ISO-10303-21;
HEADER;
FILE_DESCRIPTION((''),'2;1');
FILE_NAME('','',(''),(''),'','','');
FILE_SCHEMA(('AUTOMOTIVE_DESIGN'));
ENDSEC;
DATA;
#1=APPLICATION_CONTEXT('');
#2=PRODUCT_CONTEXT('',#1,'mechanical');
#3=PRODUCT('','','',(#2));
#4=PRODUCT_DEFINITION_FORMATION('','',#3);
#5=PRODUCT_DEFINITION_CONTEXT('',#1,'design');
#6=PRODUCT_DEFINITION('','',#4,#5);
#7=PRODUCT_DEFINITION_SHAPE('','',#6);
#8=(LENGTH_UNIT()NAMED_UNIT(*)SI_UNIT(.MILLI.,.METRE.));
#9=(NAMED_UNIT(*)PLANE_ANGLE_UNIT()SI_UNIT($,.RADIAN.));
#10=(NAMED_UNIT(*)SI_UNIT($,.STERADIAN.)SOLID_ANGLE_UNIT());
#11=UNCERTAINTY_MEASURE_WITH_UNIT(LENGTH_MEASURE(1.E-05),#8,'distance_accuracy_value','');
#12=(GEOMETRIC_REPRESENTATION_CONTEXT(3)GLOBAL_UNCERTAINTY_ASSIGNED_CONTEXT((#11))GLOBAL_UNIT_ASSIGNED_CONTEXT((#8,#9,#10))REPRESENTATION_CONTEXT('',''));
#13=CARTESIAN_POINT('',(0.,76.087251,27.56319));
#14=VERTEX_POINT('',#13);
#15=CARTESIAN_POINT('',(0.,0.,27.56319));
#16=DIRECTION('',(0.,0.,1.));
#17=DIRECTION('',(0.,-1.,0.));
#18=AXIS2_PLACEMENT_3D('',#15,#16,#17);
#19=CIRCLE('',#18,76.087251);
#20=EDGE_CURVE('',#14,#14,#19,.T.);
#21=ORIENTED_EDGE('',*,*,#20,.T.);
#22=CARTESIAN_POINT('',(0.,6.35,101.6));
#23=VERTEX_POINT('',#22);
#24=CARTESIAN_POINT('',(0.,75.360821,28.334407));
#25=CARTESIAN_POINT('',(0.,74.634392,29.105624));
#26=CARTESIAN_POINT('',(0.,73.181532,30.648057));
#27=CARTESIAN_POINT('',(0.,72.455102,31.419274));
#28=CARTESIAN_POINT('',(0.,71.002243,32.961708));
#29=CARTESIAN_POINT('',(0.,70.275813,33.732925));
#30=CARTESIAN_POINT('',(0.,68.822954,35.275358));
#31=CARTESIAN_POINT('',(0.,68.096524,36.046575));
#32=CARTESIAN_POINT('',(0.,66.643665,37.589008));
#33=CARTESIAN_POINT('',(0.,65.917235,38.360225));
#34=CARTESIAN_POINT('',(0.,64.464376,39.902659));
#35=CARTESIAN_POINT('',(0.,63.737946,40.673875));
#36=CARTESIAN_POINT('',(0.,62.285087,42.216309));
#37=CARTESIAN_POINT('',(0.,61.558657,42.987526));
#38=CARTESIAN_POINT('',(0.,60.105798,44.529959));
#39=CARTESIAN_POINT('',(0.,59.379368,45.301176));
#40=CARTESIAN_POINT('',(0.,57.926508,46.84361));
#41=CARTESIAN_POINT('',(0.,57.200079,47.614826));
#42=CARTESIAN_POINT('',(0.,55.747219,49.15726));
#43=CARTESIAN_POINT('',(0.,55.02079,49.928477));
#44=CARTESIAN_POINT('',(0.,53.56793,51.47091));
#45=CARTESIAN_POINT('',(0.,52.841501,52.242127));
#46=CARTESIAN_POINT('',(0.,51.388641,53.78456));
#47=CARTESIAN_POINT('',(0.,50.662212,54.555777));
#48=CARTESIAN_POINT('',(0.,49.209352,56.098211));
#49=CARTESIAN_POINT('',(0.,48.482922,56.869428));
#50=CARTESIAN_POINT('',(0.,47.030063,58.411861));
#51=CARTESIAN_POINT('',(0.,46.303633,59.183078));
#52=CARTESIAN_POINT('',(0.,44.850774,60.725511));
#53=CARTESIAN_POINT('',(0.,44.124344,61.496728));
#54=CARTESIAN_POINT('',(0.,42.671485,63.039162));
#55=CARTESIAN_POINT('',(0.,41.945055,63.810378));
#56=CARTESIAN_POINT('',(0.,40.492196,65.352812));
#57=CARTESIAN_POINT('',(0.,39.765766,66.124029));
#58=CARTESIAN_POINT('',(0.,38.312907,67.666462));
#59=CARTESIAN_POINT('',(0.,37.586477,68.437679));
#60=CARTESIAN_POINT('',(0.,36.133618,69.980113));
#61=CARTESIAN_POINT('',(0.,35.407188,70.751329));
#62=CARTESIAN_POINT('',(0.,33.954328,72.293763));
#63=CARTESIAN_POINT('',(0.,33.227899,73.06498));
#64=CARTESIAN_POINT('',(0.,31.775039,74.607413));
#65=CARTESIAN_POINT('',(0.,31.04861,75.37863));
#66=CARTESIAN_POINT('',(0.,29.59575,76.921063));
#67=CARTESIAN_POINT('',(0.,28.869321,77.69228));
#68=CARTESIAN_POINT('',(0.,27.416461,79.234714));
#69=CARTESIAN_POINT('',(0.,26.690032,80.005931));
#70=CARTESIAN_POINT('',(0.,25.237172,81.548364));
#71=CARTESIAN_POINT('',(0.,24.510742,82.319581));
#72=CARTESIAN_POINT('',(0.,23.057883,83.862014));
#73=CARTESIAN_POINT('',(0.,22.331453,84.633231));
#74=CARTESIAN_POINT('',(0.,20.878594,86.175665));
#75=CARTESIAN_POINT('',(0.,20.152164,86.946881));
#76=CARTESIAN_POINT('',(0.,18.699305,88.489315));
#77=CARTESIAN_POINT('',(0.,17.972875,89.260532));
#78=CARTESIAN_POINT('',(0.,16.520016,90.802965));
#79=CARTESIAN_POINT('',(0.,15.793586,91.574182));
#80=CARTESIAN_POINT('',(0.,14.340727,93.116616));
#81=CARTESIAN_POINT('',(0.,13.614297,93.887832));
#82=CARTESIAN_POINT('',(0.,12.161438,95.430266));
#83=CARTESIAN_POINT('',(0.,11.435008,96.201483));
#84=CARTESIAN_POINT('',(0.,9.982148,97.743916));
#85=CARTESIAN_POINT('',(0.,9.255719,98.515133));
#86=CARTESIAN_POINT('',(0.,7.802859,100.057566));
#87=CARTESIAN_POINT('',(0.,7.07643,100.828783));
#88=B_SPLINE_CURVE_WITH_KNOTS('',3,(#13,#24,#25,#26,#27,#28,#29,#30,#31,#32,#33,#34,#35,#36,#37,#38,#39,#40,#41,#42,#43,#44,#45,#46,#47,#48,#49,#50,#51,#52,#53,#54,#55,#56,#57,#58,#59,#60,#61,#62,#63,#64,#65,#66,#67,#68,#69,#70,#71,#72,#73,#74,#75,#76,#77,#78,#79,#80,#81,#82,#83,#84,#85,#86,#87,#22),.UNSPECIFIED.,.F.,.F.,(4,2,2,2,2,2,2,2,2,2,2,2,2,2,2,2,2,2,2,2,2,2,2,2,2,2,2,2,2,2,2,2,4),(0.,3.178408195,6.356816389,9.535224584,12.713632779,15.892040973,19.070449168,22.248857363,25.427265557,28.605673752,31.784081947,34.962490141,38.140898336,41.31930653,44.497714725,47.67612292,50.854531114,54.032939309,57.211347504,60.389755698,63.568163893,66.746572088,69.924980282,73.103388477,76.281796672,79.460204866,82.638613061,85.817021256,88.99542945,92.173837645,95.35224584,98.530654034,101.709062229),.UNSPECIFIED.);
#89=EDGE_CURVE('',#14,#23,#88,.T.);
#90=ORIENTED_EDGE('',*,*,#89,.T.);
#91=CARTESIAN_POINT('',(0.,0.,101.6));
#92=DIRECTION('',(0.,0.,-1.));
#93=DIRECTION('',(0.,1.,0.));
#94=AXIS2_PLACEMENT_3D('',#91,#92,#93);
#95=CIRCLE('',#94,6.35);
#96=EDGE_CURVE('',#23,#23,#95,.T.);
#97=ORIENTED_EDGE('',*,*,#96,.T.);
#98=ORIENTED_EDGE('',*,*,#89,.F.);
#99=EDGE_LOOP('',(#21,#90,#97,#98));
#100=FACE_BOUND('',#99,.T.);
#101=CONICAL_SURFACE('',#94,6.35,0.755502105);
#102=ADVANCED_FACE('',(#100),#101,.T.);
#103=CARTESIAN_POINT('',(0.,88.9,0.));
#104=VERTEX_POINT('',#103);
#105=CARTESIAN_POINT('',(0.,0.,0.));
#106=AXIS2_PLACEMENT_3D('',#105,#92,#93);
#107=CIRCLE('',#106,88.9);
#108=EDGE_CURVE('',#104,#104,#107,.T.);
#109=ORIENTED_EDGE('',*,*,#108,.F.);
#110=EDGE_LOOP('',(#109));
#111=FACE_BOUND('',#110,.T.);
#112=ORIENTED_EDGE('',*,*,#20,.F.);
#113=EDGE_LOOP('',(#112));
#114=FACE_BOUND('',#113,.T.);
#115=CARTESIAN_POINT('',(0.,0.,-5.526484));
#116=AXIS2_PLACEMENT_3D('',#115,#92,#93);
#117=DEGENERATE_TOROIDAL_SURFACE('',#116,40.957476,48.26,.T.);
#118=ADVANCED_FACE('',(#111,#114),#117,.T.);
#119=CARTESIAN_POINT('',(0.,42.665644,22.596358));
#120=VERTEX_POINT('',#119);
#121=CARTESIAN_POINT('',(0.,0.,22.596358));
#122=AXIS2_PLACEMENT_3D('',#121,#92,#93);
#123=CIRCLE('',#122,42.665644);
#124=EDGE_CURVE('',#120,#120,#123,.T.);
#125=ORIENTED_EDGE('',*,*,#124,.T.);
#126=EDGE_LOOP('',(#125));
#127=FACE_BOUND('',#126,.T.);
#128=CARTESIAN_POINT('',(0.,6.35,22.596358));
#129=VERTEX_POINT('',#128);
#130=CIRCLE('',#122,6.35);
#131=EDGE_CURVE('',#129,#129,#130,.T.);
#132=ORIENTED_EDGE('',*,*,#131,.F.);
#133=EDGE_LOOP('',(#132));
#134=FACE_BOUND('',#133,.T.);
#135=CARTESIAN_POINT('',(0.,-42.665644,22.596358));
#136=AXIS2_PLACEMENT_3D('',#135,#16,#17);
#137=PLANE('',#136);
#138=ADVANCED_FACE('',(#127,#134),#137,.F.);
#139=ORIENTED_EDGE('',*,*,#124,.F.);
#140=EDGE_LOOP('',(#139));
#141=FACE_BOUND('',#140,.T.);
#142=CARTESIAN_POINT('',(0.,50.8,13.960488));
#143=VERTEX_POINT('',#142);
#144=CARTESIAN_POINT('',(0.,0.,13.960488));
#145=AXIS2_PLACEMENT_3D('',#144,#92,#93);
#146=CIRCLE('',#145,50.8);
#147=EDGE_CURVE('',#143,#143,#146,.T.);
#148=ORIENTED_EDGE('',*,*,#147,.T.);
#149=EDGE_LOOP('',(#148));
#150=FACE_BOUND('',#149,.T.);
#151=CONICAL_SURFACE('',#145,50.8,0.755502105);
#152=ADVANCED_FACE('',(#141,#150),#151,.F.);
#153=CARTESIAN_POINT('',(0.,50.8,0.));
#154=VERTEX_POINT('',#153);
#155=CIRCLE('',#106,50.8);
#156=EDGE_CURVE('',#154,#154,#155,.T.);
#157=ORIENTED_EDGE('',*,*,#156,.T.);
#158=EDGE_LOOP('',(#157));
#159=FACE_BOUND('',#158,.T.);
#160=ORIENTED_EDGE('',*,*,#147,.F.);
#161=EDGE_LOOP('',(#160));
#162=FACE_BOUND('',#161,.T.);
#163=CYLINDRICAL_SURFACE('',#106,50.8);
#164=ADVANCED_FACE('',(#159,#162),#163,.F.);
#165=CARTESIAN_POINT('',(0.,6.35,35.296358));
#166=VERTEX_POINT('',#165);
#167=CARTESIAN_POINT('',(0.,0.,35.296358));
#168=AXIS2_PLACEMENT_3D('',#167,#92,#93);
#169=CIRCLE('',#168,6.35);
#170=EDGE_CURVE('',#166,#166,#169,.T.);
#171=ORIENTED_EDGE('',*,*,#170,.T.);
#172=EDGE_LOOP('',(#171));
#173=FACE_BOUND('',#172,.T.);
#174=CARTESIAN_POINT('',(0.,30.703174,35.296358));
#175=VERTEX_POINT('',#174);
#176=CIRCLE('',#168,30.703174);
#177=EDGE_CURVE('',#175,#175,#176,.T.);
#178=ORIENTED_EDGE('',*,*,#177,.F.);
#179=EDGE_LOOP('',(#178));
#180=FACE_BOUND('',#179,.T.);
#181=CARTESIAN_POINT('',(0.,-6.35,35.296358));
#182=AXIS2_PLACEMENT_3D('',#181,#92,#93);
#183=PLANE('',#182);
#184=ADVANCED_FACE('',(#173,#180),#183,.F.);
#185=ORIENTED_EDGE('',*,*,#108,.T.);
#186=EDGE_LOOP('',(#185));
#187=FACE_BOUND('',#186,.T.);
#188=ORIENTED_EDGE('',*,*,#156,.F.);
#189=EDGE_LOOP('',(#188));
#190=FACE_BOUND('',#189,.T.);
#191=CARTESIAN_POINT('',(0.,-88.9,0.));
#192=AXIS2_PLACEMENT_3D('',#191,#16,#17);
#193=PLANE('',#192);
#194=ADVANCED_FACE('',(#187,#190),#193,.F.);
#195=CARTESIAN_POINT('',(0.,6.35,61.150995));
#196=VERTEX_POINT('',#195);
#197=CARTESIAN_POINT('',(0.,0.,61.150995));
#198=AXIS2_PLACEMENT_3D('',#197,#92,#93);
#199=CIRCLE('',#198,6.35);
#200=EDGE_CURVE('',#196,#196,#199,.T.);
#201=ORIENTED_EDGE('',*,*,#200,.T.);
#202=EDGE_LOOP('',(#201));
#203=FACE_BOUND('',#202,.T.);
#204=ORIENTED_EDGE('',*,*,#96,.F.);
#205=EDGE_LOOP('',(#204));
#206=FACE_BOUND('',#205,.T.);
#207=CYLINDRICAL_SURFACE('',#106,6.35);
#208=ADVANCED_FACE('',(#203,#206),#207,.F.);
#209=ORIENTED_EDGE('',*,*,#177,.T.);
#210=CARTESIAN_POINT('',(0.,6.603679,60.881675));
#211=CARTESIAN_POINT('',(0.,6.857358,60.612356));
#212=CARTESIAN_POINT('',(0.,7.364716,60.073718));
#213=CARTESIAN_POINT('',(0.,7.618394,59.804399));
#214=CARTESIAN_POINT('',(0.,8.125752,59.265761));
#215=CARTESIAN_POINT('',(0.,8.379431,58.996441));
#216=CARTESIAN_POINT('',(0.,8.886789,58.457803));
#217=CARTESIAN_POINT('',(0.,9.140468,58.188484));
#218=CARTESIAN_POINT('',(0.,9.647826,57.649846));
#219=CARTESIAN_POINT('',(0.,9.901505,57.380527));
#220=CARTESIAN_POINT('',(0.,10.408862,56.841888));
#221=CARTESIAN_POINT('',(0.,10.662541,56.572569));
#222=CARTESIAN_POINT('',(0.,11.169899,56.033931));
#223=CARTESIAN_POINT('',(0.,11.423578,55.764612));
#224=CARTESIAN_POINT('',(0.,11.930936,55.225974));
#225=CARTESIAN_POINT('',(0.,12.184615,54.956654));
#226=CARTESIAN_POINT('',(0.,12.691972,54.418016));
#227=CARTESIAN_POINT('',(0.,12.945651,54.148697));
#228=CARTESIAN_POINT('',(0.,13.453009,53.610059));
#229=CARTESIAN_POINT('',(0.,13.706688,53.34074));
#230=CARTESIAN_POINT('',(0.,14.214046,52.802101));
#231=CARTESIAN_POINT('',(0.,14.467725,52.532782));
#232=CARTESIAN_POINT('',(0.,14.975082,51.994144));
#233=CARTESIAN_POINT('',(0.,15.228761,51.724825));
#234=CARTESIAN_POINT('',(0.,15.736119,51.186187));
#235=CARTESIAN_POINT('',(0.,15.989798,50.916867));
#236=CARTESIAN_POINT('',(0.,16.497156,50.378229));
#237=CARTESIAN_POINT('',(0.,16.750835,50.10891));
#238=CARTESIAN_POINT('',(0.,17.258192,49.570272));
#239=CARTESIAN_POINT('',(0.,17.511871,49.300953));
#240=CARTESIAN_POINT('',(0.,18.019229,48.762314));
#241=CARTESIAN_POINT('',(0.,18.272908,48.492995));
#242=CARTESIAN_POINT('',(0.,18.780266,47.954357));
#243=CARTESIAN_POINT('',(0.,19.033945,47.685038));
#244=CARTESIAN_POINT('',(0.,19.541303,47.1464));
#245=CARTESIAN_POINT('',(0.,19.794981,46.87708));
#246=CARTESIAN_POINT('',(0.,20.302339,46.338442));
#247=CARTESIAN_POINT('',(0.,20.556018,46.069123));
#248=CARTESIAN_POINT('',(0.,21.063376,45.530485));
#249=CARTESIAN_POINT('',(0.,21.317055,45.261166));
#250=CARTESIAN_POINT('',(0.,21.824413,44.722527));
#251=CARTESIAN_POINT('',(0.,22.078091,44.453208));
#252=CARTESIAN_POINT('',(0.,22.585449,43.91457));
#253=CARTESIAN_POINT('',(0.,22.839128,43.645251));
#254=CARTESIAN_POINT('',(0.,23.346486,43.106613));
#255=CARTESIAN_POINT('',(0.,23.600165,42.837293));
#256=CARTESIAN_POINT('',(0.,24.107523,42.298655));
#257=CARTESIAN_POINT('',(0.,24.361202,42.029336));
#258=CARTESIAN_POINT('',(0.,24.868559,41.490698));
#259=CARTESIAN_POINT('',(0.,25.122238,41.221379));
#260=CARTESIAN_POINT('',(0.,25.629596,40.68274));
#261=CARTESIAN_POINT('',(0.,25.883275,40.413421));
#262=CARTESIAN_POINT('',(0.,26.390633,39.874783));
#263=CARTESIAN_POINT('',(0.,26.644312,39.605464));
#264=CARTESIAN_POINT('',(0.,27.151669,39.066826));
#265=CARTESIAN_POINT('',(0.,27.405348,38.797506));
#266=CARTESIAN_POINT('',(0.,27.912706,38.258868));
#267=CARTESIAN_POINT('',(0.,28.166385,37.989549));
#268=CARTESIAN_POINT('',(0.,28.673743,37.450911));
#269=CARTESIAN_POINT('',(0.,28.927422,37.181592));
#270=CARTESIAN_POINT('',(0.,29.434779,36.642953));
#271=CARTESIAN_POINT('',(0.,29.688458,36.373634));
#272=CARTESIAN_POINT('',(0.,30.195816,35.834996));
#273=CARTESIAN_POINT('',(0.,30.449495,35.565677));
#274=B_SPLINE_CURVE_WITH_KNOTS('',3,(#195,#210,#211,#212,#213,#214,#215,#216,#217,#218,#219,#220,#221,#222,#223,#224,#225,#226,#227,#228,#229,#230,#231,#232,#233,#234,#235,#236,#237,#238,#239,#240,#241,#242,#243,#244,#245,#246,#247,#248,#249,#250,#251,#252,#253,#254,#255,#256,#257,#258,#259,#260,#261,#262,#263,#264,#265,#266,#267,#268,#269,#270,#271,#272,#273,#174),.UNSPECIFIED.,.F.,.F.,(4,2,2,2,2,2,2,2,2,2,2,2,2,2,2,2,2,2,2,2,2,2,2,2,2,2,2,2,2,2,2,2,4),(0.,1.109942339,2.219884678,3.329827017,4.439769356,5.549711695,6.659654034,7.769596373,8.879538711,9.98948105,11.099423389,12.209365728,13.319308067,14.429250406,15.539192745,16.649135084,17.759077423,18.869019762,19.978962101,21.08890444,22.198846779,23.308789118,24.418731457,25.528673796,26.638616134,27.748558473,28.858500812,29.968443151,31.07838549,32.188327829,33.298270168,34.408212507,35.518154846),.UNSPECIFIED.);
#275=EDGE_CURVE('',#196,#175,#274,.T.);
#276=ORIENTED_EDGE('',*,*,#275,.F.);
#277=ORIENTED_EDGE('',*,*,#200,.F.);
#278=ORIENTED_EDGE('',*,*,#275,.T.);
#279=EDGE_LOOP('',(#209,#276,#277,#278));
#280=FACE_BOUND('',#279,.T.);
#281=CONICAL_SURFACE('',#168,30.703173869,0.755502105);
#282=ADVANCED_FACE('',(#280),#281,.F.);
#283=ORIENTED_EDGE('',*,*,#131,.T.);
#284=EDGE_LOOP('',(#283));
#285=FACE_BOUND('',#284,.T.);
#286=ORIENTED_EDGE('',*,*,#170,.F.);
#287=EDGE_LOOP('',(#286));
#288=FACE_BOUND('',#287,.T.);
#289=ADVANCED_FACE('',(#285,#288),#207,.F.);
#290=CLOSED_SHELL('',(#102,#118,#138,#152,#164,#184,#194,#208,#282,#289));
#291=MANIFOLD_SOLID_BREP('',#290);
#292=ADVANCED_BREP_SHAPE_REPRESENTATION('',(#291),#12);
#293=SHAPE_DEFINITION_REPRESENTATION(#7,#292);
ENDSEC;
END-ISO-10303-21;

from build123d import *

# Parameters (mm, degrees)
FILLET1_R = 48.26


with BuildPart() as part:
    # Sketch2 → Revolve1 (revolve)
    with BuildSketch(Plane.YZ, mode=Mode.PRIVATE) as revolve1_sk:
        Polygon((-50.8, 0), (-50.8, 13.960488096), (-42.665643504, 22.596357665), (-6.35, 22.596357665), (-6.35, 35.296357665), (-30.703173869, 35.296357665), (-6.35, 61.150994506), (-6.35, 101.6), (-88.9, 13.960488096), (-88.9, 0), align=None)
    revolve(revolve1_sk.sketch.rotate(Axis((0, 0, 0), (0, 0, 1)), 180), axis=Axis((0, 0, 0), (0, 0, 1)))

    # Fillet1
    # the kernel refuses this fillet: 48.26 mm, written as the material it takes off along each edge
    with BuildSketch(Plane(origin=(0, 0, 13.960488096), x_dir=(0, 1, 0), z_dir=(1, 0, 0))) as fillet1_piece_1:
        with BuildLine():
            CenterArc((40.957476315, -19.486971855), FILLET1_R, 6.575639672, 36.71144238)
            Line((88.9, -13.960488096), (89.858850474, -13.849958421))
            ThreePointArc((89.858850474, -13.849958421), (89.8652, -6.980244048), (89.8652, 0))
            Line((89.8652, 0), (89.602595492, 0.661793483))
            Line((89.602595492, 0.661793483), (76.789846407, 14.264495797))
            Line((76.789846407, 14.264495797), (76.087250915, 13.602702313))
        make_face()
    revolve(axis=Axis((0, 0, 13.960488096), (0, 0, 1)), mode=Mode.SUBTRACT)


solid = part.part
